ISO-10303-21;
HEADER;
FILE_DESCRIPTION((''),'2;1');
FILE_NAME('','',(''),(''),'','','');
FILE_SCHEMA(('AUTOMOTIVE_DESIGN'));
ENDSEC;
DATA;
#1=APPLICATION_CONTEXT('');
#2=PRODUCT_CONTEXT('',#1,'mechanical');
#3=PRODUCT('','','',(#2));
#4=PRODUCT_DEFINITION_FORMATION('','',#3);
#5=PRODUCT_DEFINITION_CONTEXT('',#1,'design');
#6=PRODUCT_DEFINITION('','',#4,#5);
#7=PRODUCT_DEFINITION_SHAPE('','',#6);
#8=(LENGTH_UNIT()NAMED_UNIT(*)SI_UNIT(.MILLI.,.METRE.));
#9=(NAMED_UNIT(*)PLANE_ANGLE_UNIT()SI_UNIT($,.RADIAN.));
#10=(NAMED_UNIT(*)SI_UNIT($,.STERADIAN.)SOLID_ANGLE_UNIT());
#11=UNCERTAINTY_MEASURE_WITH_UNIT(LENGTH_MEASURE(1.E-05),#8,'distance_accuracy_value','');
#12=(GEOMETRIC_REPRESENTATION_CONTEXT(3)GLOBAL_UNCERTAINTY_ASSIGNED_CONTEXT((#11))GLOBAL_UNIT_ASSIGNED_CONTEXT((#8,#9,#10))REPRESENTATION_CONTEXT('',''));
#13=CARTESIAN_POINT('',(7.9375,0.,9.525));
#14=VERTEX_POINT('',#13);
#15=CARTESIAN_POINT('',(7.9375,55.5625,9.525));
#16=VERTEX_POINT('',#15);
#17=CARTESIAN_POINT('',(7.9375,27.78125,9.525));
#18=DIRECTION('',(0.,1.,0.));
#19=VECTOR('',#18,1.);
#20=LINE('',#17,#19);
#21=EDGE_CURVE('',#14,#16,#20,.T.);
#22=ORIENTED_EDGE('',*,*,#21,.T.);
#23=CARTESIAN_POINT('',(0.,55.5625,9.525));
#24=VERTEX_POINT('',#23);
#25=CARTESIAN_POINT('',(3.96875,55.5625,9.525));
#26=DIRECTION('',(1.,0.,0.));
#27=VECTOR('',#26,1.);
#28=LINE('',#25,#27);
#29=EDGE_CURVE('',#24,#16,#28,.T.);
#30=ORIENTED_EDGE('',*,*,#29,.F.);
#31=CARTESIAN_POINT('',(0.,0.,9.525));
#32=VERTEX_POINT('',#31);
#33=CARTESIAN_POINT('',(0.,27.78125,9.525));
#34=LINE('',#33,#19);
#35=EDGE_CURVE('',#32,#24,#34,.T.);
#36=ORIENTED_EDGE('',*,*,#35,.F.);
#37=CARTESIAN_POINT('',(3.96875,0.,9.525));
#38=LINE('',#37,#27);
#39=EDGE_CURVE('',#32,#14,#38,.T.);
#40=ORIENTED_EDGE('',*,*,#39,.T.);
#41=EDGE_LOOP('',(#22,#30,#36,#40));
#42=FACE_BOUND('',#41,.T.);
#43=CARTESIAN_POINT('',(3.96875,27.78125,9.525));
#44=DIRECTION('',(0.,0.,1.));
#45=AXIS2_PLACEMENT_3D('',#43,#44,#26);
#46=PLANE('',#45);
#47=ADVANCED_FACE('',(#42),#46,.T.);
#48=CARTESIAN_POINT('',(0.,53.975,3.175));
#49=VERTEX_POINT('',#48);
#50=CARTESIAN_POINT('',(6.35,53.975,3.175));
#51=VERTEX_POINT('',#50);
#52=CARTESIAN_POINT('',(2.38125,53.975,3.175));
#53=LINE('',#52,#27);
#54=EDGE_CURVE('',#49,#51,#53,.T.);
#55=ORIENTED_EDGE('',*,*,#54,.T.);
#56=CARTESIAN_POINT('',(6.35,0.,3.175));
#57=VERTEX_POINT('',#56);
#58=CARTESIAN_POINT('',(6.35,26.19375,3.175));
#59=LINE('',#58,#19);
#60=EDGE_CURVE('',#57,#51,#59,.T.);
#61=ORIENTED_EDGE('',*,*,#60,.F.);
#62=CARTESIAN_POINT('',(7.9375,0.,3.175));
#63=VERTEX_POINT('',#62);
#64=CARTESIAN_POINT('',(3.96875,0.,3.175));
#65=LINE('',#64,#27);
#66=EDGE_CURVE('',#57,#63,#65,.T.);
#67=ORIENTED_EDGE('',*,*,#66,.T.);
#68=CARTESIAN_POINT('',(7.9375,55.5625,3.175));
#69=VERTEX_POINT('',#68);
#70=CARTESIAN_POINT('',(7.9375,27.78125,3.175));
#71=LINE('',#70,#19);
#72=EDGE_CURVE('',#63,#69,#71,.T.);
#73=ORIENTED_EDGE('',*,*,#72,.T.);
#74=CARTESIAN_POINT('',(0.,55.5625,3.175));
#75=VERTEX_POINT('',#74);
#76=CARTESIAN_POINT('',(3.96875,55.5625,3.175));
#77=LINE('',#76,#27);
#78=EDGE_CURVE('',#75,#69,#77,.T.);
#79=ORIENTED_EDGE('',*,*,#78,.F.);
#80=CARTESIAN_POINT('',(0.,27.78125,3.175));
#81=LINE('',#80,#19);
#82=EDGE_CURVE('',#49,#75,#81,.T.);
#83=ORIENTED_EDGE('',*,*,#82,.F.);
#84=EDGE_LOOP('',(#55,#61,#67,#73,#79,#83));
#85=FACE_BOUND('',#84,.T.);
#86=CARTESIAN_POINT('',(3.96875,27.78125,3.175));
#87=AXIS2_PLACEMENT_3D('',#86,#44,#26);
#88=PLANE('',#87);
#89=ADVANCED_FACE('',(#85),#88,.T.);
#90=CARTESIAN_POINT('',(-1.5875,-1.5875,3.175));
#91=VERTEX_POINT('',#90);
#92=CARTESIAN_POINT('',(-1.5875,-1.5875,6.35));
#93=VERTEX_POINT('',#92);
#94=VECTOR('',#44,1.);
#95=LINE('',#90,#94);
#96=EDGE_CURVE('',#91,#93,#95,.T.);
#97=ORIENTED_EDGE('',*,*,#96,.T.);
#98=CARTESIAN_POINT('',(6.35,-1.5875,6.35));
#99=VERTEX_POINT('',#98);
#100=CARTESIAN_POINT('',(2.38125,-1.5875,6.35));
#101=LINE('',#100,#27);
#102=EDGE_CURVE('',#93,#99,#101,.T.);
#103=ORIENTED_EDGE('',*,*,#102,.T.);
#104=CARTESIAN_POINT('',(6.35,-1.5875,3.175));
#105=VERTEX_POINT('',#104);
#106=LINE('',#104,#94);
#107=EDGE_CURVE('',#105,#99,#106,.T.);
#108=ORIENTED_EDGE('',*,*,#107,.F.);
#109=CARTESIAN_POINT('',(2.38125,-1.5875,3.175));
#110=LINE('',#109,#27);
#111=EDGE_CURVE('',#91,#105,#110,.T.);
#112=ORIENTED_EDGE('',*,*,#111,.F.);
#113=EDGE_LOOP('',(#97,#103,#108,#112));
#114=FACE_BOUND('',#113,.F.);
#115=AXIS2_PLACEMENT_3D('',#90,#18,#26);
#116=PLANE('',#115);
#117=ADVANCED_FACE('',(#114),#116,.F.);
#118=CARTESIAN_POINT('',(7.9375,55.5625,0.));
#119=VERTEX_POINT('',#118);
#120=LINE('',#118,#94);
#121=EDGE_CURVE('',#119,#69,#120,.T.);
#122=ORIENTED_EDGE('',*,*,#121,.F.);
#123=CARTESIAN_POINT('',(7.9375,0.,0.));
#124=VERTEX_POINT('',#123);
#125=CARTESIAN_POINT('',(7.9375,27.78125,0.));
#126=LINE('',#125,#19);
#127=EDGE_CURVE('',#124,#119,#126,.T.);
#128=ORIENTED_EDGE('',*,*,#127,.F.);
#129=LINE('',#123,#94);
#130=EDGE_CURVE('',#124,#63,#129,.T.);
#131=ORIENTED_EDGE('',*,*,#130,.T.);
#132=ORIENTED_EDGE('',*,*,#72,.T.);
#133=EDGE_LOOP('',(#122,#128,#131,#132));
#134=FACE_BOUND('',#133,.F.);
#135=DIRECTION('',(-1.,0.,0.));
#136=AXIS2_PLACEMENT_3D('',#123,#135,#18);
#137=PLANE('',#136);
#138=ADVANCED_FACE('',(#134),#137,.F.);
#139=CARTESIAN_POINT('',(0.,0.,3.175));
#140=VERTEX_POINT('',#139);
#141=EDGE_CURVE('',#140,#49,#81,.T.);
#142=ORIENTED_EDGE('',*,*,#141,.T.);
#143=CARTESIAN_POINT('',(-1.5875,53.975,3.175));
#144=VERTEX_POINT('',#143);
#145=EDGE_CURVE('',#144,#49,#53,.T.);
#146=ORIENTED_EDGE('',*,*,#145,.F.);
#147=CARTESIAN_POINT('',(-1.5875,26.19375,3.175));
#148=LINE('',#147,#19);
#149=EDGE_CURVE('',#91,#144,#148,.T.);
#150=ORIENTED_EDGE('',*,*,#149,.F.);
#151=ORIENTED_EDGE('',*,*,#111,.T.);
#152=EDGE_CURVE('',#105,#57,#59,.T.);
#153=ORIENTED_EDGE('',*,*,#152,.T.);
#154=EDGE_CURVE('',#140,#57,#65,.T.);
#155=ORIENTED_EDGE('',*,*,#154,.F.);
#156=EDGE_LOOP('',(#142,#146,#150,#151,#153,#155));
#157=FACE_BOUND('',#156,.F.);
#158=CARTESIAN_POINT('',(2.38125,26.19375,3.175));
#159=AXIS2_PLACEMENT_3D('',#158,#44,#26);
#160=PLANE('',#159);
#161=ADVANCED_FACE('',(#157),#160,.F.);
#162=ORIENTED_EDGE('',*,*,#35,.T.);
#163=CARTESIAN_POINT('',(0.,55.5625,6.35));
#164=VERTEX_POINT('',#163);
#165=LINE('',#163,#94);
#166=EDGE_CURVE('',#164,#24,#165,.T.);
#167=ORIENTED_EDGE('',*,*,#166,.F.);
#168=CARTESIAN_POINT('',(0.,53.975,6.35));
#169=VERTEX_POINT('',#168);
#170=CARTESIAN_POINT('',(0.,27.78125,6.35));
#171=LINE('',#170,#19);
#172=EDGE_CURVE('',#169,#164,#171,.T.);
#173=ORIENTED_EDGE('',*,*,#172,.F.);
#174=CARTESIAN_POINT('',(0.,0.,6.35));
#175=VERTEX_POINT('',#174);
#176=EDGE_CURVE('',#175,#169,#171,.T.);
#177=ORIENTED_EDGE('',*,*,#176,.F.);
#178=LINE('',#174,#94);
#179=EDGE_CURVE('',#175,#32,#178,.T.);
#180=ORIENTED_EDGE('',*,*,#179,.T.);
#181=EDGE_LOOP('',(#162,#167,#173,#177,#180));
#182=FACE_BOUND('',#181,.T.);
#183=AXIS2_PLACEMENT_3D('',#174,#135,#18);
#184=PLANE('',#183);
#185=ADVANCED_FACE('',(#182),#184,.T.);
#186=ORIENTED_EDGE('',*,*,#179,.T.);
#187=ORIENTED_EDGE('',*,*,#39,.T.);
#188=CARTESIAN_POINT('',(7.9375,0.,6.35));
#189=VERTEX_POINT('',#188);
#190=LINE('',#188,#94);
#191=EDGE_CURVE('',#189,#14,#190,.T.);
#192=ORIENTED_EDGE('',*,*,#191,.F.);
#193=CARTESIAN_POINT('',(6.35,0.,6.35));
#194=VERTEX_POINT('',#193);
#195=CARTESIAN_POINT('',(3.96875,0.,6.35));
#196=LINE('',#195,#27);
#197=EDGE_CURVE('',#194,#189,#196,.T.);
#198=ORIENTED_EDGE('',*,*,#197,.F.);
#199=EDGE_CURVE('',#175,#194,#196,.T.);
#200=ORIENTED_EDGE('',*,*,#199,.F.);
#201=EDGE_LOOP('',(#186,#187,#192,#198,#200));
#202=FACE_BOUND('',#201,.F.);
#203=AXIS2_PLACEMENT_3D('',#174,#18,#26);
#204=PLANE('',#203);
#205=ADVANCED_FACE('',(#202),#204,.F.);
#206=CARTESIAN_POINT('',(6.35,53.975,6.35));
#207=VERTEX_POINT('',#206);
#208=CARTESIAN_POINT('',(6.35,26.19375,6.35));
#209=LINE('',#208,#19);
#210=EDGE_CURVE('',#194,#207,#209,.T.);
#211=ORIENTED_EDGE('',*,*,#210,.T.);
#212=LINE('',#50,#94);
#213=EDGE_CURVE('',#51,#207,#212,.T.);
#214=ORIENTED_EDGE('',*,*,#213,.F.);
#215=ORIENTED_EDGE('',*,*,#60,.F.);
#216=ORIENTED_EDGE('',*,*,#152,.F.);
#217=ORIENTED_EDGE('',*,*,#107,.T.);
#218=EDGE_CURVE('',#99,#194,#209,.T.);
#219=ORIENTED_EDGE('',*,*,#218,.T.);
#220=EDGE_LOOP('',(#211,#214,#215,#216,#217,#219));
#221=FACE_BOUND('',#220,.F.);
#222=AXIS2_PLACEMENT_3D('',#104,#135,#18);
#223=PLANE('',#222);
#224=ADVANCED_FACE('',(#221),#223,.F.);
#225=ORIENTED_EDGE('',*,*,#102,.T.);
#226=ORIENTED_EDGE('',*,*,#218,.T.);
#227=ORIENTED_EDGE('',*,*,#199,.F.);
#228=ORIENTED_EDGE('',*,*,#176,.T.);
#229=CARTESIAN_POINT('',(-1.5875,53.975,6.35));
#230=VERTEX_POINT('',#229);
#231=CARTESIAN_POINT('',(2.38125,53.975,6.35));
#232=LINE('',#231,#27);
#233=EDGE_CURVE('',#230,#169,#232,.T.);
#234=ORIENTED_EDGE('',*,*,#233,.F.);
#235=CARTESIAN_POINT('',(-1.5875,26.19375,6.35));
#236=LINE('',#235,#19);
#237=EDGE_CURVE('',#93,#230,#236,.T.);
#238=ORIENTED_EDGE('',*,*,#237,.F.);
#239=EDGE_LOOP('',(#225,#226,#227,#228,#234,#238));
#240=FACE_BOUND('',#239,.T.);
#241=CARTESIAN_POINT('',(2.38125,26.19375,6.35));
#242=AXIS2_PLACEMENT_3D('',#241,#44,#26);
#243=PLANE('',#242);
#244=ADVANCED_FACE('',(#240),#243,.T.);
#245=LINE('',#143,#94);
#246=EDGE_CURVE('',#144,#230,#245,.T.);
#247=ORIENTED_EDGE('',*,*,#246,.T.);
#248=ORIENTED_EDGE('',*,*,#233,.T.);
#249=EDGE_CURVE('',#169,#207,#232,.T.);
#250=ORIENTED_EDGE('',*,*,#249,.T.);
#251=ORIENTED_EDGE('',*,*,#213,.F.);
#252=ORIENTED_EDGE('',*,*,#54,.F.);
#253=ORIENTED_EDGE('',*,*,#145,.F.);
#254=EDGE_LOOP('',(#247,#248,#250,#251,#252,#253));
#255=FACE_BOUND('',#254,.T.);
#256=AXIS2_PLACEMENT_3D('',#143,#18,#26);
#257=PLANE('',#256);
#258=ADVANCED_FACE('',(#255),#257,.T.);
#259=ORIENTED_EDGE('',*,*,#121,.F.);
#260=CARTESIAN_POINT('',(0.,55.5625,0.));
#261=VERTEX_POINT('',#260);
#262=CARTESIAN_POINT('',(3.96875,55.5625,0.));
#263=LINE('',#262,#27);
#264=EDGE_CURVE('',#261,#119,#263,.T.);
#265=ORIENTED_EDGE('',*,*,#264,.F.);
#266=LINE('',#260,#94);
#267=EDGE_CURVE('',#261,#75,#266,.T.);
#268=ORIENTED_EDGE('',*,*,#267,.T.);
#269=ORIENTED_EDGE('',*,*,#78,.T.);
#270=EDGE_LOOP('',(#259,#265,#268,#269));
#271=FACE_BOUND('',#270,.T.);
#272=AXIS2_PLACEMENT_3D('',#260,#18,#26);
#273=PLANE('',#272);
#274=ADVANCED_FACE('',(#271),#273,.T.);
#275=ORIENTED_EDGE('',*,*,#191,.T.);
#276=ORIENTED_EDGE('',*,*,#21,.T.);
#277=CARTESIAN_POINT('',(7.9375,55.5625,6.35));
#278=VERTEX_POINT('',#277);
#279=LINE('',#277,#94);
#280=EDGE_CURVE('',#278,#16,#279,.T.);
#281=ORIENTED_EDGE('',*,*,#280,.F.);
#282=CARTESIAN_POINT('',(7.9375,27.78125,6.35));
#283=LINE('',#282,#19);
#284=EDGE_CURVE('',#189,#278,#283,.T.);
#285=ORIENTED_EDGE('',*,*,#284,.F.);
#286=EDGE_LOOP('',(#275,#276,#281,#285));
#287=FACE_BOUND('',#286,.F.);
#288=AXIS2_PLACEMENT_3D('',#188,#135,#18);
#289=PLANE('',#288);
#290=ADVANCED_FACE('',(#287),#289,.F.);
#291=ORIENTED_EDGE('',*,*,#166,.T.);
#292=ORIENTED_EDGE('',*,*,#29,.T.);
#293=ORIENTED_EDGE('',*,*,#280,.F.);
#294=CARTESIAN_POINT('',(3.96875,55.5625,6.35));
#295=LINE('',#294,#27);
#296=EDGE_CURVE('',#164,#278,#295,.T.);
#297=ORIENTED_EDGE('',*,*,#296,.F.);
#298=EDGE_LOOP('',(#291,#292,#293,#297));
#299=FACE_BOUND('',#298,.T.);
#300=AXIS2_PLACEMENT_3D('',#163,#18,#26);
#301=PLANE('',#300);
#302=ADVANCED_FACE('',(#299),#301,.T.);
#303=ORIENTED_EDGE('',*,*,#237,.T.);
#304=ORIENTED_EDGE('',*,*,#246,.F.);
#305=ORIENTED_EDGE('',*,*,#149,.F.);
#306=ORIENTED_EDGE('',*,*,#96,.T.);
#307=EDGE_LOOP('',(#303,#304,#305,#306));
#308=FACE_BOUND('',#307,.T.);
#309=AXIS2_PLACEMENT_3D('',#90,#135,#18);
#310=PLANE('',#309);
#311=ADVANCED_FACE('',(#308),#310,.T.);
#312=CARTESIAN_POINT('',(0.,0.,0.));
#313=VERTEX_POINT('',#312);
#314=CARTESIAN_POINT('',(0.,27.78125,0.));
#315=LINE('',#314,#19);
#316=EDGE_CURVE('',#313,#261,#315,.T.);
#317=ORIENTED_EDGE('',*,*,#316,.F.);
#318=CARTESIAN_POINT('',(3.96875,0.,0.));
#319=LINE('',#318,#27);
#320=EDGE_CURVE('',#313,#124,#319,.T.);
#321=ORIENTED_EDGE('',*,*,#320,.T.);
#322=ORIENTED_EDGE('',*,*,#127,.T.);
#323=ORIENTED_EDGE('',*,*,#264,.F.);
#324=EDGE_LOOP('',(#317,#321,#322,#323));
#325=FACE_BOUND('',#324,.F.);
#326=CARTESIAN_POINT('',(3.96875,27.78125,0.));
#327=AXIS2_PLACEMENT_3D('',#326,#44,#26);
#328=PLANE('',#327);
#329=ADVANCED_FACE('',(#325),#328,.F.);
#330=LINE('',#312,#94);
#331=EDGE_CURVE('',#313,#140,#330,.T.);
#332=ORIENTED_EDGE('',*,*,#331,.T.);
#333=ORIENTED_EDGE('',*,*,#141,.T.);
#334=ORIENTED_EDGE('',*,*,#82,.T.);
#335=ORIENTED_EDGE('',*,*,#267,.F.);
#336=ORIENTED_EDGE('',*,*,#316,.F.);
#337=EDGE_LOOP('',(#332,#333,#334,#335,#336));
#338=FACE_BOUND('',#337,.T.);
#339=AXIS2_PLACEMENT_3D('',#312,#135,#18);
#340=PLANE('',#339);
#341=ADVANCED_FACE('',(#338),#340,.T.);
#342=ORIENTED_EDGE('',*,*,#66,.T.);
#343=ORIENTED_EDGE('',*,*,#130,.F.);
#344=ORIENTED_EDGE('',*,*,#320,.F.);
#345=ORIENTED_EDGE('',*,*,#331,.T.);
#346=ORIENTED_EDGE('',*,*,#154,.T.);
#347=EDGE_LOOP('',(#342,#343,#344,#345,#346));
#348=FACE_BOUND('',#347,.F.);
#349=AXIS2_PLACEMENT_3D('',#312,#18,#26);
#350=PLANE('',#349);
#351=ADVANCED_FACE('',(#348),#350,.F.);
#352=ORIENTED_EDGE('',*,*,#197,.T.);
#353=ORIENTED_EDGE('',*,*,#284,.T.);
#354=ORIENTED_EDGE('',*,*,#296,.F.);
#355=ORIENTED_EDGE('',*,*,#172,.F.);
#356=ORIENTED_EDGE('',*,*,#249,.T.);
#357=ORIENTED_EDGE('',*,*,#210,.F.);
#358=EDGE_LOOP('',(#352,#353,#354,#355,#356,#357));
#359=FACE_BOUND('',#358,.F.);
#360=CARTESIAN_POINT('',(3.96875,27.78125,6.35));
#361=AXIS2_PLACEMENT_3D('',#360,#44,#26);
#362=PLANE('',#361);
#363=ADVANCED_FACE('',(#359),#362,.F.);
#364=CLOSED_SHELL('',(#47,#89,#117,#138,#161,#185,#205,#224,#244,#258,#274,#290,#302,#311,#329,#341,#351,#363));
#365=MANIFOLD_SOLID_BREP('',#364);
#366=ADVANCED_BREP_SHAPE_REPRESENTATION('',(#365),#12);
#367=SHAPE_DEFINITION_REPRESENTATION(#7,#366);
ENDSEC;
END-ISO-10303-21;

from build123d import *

# Parameters (mm, degrees)
F2_W     = 7.9375
F2_H     = 55.5625
F3_DEPTH = 3.175
F4_W     = 7.9375
F4_H     = 55.5625
F5_DEPTH = 3.175
F6_W     = 7.9375
F6_H     = 55.5625
F7_DEPTH = 3.175


# Not quite as in the source:
# - a variable given as a bare number and used for a length is read in inches; the dataset says mm whatever the document's units were


with BuildPart() as f3:
    # F2 (on Top) → F3 (new body)
    with BuildSketch(Plane.XY):
        with Locations((3.96875, 27.78125)):
            Rectangle(F2_W, F2_H)
    extrude(amount=F3_DEPTH)

    # F4 (on face) → F5 (join)
    with BuildSketch(Plane.XY.offset(3.175)):
        with Locations((2.38125, 26.19375)):
            Rectangle(F4_W, F4_H)
    extrude(amount=F5_DEPTH)

    # F6 (on face) → F7 (join)
    with BuildSketch(Plane.XY.offset(6.35)):
        with Locations((3.96875, 27.78125)):
            Rectangle(F6_W, F6_H)
    extrude(amount=F7_DEPTH)


solid = f3.part
